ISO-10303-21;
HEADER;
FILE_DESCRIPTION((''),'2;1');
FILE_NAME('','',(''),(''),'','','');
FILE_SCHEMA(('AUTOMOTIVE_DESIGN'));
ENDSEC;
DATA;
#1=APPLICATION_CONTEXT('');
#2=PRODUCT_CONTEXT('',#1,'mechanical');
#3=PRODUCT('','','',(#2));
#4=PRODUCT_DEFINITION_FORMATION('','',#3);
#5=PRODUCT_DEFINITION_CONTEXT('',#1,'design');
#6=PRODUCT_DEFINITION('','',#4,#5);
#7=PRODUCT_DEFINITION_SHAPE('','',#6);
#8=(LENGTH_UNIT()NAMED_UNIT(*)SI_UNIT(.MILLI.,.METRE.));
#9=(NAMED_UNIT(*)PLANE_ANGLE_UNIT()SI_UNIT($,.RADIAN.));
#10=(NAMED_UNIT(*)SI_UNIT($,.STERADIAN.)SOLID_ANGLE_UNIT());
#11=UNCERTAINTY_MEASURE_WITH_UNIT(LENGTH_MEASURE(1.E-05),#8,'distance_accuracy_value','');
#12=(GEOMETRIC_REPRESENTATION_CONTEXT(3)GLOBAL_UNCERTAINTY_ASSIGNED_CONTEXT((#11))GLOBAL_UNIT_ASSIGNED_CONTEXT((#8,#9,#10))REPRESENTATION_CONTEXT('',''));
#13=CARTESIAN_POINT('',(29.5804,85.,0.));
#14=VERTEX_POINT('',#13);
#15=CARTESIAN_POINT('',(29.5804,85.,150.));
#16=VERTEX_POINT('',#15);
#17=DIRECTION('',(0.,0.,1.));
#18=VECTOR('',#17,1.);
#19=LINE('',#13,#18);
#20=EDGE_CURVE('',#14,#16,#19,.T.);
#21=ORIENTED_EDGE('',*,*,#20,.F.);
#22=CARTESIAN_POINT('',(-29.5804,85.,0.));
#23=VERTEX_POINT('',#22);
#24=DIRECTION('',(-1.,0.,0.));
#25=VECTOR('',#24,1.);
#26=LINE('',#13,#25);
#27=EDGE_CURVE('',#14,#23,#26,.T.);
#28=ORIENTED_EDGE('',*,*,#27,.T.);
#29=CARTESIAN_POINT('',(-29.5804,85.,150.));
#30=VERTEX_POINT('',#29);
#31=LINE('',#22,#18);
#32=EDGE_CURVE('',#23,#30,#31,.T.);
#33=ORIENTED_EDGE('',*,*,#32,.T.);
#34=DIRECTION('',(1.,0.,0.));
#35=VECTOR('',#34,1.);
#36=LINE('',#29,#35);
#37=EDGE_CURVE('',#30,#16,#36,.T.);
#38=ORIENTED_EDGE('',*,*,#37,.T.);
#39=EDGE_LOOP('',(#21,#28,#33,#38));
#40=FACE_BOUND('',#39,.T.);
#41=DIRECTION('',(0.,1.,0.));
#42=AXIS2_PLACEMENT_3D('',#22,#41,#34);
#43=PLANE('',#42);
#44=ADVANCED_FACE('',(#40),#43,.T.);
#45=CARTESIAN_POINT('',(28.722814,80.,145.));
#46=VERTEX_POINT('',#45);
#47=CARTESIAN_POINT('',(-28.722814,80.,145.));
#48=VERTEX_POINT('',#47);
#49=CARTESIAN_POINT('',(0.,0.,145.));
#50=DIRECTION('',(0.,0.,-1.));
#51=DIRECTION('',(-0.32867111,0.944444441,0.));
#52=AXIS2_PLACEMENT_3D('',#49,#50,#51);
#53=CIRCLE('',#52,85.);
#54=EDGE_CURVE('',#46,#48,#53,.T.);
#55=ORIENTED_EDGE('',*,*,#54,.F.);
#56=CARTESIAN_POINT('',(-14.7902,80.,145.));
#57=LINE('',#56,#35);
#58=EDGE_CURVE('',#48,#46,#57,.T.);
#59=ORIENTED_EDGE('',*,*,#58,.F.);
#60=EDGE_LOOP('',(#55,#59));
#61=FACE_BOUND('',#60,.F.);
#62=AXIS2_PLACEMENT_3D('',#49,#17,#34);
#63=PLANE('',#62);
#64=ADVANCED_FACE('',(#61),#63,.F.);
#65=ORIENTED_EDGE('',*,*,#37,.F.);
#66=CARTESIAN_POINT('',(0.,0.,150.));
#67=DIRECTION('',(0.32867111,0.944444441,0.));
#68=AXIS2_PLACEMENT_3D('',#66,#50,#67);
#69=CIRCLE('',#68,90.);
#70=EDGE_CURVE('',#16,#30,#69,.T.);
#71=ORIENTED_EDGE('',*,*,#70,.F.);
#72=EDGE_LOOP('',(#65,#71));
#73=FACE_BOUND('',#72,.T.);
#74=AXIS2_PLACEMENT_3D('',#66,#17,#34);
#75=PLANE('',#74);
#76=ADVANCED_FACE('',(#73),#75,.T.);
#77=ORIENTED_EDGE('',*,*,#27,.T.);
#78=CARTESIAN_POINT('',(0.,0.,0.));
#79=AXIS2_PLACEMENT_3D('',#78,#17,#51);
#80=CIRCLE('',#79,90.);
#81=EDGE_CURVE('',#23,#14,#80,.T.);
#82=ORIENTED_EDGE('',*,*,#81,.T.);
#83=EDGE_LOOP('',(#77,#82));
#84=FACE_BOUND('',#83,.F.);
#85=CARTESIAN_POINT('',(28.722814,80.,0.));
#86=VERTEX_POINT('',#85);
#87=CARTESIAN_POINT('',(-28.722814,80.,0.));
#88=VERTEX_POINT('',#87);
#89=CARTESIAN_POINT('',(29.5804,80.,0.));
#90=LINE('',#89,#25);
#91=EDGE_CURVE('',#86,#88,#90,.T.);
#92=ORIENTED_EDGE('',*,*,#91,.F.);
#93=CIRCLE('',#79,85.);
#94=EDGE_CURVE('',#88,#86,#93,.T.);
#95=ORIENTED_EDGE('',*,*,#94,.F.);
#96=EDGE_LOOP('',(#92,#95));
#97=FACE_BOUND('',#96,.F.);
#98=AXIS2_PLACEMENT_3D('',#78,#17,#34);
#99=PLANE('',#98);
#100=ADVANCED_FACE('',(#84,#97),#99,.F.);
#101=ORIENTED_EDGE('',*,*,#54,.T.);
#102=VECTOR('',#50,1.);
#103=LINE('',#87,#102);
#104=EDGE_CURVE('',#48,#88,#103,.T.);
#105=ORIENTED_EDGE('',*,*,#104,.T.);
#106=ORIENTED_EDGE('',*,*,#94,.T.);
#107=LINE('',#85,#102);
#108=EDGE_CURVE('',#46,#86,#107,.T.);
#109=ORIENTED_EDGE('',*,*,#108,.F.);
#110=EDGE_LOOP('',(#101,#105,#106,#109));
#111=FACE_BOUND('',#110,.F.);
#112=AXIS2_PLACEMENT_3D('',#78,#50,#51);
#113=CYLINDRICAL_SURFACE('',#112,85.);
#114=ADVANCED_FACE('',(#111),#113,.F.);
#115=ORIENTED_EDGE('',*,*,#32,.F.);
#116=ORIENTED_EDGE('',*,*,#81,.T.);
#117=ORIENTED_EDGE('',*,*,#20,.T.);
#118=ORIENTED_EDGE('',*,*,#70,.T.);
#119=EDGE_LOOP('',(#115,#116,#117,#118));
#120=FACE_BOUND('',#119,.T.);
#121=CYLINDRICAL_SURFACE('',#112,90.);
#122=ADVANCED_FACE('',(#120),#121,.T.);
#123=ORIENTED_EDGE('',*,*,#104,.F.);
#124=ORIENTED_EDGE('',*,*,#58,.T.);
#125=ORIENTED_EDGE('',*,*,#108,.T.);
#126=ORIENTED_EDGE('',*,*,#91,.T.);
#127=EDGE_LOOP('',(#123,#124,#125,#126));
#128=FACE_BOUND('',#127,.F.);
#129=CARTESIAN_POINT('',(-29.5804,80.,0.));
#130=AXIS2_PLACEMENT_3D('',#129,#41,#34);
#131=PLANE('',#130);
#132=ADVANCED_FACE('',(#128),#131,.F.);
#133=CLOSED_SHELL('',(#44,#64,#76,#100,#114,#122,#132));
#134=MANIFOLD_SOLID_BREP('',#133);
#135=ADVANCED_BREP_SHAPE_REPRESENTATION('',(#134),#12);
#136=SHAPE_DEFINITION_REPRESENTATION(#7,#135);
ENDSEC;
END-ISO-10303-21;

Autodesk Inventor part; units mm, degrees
ref_plane "XZ Plane" through (0, 0, 0) normal (0, 1, 0) x (-1, 0, 0)
ref_plane "XY Plane" through (0, 0, 0) normal (0, 0, 1) x (1, 0, 0)
sketch "Skizze1" plane through (0, 0, 0) normal (0, 0, 1) x (1, 0, 0)
  arc A0 (-29.5804, 85) -> (29.5804, 85) centre (0, 0) ccw
  line L0 (0, 120) -> (0, -125) projected
  line L1 (-126, 0) -> (126, 0) projected
  line L2 (-29.5804, 85) -> (29.5804, 85)
  dimension "d0" = 180
  dimension "d1" = 85
extrude "Extrusion1" add sketch "Skizze1" along normal blind 150
shell "Wandstärke1" thickness 5 removed faces 1 at (-9.8601, -16.0312, 0)
ref_plane "Arbeitsebene1" through (0, 0, 0) normal (1, 0, 0) x (0, 1, 0)
properties part number "Testmasse"
